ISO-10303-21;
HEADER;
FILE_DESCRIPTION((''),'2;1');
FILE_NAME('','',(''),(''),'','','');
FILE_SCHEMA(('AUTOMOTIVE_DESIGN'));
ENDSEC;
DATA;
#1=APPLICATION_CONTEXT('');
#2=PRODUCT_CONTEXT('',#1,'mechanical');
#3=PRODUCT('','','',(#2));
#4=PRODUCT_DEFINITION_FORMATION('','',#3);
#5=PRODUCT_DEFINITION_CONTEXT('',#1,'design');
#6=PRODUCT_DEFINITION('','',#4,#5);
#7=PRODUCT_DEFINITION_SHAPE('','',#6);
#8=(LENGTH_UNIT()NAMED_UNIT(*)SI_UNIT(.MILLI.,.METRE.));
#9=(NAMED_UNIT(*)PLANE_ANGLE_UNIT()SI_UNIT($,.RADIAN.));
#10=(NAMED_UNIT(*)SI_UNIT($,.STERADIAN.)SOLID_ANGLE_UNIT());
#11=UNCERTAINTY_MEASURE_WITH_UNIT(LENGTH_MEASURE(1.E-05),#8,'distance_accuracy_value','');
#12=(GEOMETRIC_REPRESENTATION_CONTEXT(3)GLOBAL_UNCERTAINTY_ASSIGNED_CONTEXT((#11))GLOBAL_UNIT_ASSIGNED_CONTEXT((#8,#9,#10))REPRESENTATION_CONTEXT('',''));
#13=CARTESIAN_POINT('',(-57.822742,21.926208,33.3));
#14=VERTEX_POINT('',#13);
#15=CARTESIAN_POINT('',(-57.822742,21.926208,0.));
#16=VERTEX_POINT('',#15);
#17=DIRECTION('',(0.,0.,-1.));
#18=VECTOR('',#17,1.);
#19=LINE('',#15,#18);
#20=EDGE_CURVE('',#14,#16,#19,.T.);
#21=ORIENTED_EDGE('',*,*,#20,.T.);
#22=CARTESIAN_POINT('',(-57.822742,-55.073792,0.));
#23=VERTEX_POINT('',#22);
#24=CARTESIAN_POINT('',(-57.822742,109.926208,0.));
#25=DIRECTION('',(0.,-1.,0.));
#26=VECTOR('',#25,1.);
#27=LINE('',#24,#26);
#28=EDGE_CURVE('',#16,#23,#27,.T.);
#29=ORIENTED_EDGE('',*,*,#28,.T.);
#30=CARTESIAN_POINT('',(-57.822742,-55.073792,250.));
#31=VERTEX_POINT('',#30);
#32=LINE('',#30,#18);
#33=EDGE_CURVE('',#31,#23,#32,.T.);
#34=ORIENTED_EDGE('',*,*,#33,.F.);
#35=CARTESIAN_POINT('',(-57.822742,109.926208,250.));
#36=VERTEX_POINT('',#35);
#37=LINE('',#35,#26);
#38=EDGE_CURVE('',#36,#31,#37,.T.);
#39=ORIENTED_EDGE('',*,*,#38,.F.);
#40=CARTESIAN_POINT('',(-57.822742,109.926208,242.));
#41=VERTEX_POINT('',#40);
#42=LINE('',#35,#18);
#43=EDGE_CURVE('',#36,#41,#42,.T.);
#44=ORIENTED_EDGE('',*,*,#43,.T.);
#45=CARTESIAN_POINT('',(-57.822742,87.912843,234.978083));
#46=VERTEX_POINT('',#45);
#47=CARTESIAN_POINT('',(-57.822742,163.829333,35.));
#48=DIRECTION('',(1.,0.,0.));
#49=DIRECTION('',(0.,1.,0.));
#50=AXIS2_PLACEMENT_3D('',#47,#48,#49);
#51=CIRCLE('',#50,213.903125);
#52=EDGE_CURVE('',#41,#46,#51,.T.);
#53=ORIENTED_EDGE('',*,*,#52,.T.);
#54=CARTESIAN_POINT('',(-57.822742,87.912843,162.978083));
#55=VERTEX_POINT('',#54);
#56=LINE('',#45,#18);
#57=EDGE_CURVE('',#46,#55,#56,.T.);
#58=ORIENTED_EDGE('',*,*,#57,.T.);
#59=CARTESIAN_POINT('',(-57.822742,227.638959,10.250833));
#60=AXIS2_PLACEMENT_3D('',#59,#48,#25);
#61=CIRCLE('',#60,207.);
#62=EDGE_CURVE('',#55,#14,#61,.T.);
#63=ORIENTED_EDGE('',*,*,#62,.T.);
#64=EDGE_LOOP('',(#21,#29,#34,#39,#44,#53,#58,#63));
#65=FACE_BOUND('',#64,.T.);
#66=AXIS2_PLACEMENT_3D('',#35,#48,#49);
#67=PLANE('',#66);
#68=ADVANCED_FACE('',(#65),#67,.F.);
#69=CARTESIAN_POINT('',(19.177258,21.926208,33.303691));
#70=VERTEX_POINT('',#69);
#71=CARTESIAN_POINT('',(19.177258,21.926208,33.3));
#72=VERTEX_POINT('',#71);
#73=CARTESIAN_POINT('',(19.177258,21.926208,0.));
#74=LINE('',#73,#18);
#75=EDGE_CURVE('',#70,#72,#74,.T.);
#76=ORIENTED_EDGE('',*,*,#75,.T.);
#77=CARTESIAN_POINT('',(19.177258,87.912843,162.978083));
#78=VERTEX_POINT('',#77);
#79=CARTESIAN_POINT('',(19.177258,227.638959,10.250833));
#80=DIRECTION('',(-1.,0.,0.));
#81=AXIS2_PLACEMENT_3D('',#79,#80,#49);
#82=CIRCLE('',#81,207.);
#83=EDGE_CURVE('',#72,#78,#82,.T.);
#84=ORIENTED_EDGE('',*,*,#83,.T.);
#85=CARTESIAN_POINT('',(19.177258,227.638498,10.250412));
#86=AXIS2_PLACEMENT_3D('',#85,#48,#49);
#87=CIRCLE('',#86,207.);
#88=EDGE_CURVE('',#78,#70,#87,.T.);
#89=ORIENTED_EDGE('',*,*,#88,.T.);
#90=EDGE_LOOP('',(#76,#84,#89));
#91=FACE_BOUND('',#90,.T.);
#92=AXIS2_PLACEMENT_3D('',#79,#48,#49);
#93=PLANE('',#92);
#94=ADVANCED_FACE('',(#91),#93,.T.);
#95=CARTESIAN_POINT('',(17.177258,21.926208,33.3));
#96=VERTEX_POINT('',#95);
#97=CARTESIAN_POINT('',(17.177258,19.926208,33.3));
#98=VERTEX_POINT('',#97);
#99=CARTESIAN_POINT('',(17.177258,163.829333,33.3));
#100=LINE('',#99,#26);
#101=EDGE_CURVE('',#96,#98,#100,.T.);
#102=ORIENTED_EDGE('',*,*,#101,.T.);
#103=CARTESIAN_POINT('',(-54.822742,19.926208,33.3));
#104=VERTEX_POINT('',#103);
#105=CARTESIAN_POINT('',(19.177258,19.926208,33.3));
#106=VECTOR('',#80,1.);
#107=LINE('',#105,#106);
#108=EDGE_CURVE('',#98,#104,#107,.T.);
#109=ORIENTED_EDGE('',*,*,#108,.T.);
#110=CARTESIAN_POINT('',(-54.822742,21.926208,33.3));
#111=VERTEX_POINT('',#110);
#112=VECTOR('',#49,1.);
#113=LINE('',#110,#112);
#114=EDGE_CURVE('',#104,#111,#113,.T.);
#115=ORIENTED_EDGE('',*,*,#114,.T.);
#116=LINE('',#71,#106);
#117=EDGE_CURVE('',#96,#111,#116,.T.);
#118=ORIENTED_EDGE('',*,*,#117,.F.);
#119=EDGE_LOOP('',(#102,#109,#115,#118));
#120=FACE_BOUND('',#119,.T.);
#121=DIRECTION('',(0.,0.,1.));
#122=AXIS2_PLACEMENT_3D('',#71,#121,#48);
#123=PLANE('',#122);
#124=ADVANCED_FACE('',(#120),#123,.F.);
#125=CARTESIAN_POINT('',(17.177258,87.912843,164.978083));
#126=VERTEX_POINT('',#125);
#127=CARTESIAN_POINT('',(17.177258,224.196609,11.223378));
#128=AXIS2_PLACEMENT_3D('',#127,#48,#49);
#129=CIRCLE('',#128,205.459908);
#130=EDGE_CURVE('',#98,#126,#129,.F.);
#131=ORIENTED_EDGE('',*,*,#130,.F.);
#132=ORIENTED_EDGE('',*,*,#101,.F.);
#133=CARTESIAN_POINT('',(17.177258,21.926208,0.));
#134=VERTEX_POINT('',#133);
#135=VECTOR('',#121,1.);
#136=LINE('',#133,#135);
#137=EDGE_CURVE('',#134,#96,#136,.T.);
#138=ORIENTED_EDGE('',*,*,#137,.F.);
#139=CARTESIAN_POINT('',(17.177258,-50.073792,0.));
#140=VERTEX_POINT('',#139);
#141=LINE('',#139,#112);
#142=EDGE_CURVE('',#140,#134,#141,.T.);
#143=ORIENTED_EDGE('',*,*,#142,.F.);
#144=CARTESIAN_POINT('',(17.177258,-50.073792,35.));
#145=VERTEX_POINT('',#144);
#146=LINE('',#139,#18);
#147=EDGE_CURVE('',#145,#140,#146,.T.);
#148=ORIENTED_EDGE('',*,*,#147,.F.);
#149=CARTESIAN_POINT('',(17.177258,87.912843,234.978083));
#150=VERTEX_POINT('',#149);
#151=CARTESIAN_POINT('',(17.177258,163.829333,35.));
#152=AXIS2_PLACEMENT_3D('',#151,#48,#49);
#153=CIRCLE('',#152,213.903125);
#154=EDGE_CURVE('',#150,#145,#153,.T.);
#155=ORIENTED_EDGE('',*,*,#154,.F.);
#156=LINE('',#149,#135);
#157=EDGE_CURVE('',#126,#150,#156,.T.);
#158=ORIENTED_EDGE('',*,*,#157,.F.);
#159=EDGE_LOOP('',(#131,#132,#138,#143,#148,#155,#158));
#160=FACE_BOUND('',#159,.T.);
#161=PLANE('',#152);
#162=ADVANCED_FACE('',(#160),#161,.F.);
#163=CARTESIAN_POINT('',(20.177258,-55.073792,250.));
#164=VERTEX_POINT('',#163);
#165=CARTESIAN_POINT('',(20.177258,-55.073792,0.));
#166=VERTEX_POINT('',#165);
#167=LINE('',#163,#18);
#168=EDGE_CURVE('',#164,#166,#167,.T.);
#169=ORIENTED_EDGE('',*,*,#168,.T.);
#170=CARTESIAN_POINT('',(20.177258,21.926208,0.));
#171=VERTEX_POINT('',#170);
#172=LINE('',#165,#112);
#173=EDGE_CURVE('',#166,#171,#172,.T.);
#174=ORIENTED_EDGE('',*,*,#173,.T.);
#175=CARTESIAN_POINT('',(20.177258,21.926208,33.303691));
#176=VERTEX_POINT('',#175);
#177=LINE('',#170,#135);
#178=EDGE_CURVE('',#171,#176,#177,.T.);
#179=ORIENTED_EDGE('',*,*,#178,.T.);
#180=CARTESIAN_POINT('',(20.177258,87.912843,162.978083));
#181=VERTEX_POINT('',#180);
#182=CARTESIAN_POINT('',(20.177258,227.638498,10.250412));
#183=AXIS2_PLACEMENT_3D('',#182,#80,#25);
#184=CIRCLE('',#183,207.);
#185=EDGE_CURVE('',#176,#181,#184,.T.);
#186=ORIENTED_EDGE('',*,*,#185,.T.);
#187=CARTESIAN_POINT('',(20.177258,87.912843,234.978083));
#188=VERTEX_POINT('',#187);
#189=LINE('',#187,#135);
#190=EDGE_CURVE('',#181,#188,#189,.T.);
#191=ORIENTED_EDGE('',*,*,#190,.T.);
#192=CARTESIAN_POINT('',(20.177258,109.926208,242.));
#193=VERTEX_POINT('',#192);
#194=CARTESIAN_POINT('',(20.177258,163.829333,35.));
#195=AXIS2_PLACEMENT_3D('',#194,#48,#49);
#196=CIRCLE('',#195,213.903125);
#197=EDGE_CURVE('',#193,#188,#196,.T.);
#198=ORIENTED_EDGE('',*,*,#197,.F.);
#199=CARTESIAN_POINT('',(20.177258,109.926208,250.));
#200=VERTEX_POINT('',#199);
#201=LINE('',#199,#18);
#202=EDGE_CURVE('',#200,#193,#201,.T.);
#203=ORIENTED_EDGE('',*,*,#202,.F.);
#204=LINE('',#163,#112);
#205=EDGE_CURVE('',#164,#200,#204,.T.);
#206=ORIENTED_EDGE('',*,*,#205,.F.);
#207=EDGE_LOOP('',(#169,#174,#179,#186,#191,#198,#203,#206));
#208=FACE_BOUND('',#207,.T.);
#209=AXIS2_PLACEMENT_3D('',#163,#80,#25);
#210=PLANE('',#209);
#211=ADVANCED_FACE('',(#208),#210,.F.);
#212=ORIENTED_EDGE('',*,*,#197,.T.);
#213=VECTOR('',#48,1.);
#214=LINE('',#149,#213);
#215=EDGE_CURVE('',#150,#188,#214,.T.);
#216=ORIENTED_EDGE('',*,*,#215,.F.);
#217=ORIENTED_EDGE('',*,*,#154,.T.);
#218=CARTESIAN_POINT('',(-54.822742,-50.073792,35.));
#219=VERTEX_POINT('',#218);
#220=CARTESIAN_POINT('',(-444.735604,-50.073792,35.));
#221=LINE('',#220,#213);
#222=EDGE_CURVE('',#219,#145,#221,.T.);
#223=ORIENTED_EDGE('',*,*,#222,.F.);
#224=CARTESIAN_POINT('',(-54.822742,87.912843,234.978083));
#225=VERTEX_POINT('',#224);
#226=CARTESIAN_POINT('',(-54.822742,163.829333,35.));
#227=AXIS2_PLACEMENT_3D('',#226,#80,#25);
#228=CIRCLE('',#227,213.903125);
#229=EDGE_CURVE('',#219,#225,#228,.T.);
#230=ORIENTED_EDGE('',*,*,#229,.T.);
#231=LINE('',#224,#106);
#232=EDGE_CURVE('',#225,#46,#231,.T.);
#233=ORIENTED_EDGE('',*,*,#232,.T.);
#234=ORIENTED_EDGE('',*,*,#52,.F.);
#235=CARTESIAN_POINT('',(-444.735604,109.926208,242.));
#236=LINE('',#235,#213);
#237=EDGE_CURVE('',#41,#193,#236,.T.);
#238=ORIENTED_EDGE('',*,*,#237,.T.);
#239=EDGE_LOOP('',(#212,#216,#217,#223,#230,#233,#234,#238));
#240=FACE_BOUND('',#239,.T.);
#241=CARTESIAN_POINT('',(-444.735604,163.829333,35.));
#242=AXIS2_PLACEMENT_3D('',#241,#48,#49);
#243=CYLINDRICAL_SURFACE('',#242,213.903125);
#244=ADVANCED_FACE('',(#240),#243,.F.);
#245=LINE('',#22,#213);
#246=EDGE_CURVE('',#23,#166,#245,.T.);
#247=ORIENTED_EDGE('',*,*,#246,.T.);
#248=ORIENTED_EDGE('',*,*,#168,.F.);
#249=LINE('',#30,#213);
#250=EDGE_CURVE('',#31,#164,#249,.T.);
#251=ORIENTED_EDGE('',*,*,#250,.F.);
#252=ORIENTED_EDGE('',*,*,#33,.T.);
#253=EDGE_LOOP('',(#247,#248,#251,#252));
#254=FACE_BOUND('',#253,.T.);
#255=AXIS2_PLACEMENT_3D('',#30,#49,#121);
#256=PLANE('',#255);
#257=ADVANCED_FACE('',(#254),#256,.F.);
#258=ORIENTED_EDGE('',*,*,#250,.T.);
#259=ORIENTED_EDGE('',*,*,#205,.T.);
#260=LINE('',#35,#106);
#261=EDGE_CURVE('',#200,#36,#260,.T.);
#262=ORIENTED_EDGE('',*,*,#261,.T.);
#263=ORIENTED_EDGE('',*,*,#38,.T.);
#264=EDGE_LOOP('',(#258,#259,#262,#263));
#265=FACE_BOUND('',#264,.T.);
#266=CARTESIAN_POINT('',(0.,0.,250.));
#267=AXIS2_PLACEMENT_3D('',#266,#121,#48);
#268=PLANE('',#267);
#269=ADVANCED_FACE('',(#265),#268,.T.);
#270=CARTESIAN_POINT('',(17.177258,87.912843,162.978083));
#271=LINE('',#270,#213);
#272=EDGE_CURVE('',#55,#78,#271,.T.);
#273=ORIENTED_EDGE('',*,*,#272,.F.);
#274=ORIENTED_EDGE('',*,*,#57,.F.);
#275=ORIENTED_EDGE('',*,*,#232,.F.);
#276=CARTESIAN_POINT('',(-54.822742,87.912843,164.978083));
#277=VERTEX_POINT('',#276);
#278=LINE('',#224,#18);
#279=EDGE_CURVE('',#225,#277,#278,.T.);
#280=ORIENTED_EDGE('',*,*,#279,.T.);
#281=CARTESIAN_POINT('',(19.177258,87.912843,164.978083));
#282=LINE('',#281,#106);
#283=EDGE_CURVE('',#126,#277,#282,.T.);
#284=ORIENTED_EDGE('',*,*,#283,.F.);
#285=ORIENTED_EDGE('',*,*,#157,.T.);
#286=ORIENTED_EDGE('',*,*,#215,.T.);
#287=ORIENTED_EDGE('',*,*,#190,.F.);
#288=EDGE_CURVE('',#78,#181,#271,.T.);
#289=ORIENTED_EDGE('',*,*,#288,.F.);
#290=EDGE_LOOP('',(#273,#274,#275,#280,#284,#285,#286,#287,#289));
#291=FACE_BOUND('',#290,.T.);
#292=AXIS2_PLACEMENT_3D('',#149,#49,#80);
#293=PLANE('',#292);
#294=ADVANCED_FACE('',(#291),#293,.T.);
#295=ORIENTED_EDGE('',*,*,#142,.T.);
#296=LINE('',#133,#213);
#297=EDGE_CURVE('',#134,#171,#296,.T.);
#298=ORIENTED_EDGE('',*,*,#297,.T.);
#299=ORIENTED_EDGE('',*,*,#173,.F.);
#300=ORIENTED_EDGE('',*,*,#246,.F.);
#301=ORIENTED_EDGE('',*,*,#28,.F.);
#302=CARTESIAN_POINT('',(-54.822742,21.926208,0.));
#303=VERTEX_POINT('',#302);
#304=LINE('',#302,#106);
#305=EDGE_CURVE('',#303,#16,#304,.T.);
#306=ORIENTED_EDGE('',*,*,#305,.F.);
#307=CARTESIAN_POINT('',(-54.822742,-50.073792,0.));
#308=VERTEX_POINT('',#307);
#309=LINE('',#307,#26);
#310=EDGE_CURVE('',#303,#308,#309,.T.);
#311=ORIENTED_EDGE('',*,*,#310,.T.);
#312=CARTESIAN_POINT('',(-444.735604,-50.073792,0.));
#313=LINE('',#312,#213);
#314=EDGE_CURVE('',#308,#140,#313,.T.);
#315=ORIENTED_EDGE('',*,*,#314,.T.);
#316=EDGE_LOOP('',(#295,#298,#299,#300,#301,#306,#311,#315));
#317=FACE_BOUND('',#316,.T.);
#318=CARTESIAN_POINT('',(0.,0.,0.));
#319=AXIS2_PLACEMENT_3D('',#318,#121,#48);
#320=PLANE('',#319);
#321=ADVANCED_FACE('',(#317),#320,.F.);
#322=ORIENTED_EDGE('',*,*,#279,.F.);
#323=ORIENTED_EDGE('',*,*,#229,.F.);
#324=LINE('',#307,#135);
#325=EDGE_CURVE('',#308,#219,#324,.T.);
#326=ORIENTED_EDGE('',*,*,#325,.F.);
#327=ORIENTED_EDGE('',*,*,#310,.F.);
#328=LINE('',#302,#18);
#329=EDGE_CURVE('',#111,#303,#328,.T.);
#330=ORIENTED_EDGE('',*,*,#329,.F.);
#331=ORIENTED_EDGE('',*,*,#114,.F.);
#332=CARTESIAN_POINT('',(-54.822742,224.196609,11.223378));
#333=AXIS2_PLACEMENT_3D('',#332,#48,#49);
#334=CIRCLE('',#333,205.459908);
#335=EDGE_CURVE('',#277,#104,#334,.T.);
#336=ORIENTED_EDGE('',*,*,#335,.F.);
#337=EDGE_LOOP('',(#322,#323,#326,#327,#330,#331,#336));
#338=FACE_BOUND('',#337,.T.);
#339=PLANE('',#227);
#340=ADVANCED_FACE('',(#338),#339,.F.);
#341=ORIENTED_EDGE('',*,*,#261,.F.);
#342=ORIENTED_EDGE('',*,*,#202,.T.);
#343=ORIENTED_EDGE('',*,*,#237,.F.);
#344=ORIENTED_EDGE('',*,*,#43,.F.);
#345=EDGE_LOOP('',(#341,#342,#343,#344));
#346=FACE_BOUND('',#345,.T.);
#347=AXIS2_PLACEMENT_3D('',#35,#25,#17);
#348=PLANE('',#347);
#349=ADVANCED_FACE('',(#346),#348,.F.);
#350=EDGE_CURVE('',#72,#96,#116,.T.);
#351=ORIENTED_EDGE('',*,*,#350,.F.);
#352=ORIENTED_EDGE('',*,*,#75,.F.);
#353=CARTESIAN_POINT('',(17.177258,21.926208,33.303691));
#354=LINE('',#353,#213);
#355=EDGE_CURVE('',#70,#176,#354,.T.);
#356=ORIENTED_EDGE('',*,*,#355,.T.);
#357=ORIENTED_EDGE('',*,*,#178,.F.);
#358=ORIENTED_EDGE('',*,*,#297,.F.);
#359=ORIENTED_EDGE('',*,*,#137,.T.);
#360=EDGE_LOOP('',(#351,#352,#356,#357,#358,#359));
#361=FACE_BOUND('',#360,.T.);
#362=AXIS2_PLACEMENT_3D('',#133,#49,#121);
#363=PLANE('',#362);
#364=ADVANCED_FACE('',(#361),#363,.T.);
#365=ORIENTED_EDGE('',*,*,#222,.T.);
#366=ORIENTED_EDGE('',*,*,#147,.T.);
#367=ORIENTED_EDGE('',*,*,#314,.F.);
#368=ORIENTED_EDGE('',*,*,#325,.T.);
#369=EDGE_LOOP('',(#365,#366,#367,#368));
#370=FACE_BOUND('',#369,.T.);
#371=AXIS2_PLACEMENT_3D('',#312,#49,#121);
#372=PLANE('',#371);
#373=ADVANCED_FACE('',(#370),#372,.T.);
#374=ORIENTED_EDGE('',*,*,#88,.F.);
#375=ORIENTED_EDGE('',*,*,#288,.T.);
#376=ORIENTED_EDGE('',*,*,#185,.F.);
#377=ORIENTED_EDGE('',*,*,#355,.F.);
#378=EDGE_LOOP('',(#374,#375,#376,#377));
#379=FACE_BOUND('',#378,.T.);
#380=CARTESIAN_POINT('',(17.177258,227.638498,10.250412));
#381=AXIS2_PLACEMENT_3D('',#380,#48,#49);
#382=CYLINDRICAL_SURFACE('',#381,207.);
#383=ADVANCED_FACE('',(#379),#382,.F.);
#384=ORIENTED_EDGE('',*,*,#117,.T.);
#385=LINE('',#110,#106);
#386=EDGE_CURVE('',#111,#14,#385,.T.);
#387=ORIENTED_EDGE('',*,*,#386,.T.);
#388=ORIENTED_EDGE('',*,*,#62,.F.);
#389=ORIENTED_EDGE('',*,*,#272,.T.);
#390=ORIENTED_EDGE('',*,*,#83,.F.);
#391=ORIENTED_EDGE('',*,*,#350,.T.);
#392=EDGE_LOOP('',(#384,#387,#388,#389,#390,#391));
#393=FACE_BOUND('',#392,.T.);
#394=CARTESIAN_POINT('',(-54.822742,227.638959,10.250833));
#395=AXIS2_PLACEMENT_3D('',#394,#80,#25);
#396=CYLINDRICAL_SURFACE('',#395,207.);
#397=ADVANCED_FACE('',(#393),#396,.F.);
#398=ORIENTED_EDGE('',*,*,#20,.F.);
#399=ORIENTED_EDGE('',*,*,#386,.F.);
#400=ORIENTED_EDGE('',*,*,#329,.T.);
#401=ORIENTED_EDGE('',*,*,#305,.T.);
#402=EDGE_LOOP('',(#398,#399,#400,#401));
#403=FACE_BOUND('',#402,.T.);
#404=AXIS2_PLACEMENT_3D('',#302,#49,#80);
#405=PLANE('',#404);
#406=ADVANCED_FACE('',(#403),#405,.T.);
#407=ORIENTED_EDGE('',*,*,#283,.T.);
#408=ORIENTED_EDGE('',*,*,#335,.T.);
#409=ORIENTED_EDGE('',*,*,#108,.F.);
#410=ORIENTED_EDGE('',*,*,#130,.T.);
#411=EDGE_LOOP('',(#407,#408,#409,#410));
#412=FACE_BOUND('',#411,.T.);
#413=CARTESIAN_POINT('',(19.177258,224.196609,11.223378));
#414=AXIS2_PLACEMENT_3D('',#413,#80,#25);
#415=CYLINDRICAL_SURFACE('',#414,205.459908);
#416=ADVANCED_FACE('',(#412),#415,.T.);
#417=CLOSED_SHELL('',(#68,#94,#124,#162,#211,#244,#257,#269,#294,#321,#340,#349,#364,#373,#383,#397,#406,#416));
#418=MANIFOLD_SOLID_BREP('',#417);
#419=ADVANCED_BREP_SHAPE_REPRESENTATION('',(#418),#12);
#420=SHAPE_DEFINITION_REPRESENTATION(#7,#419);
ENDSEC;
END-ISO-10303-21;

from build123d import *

# Parameters (mm, degrees)
ESQUISSE1_W                  = 78
ESQUISSE1_H                  = 165
BOSS_EXTRU_1_DEPTH           = 250
ENL_V_MAT_EXTRU_1_DEPTH      = 285.020723146
ENL_V_MAT_EXTRU_1_DEPTH_BACK = 78
BOSS_EXTRU_4_START           = 17.177257831
BOSS_EXTRU_4_DEPTH           = 3
BOSS_EXTRU_5_START           = -3
BOSS_EXTRU_5_DEPTH           = 3
BOSS_EXTRU_9_START           = 74
BOSS_EXTRU_9_DEPTH           = 74


# Read off the part's stored shape, not the designer's step: Boss.-Extru.4
with BuildPart() as part:
    # Esquisse1 → Boss.-Extru.1 (new body)
    with BuildSketch(Plane.XY):
        with Locations((-18.822742169, 27.426207869)):
            Rectangle(ESQUISSE1_W, ESQUISSE1_H)
    extrude(amount=BOSS_EXTRU_1_DEPTH)

    # Esquisse2 → Enlèv. mat.-Extru.1 (cut, two sides: drawn at the far end of the back side and taken through both)
    with BuildSketch(Plane.ZY.offset(57.822742169).offset(-ENL_V_MAT_EXTRU_1_DEPTH_BACK)):
        with BuildLine():
            Line((0, -664.156424161), (0, -55.073792131))
            Line((0, -55.073792131), (0, -50.073792131))
            Line((0, -50.073792131), (35, -50.073792131))
            ThreePointArc((35, -50.073792131), (165.813798966, -5.411019544), (242, 109.926207869))
            Line((242, 109.926207869), (395.487506317, 699.35240176))
            Line((395.487506317, 699.35240176), (-774.457853053, 1038.696573142))
            Line((-774.457853053, 1038.696573142), (-1169.94535937, -324.812252779))
            Line((-1169.94535937, -324.812252779), (0, -664.156424161))
        make_face()
    extrude(amount=ENL_V_MAT_EXTRU_1_DEPTH + ENL_V_MAT_EXTRU_1_DEPTH_BACK, mode=Mode.SUBTRACT)

    # Boss.-Extru.4 outline → Boss.-Extru.4 (add)
    with BuildSketch(Plane.YZ.offset(BOSS_EXTRU_4_START)):
        with BuildLine():
            Line((-50.073792131, 0), (21.926207869, 0))
            Line((21.926207869, 0), (21.926207869, 33.303690661))
            ThreePointArc((21.926207869, 33.303690661), (43.150814353, 104.129560556), (87.912843237, 162.978082516))
            Line((87.912843237, 162.978082516), (87.912843237, 234.978082516))
            ThreePointArc((87.912843237, 234.978082516), (-12.229352313, 156.482040882), (-50.073792131, 35))
            Line((-50.073792131, 35), (-50.073792131, 0))
        make_face()
    extrude(amount=BOSS_EXTRU_4_DEPTH)

    # Esquisse7 → Boss.-Extru.5 (add)
    with BuildSketch(Plane.ZY.offset(57.822742169).offset(BOSS_EXTRU_5_START)):
        with BuildLine():
            Line((0, -50.073792131), (0, 21.926207869))
            Line((0, 21.926207869), (33.3, 21.926207869))
            ThreePointArc((33.3, 21.926207869), (104.127859837, 43.15019521), (162.978082516, 87.912843237))
            Line((162.978082516, 87.912843237), (234.978082516, 87.912843237))
            ThreePointArc((234.978082516, 87.912843237), (156.482040881, -12.229352313), (35, -50.073792131))
            Line((35, -50.073792131), (0, -50.073792131))
        make_face()
    extrude(amount=BOSS_EXTRU_5_DEPTH)

    # Esquisse22 → Boss.-Extru.9 (add)
    with BuildSketch(Plane(origin=(-54.822742169, 0, 0), x_dir=(0, 0, -1), z_dir=(1, 0, 0)).offset(BOSS_EXTRU_9_START)):
        with BuildLine():
            Line((-33.3, 21.926207869), (-33.3, 19.926207869))
            ThreePointArc((-33.3, 19.926207869), (-105.482114961, 41.634114192), (-164.978082516, 87.912843237))
            Line((-164.978082516, 87.912843237), (-162.978082516, 87.912843237))
            ThreePointArc((-162.978082516, 87.912843237), (-104.127859837, 43.15019521), (-33.3, 21.926207869))
        make_face()
    extrude(amount=-BOSS_EXTRU_9_DEPTH)


solid = part.part
